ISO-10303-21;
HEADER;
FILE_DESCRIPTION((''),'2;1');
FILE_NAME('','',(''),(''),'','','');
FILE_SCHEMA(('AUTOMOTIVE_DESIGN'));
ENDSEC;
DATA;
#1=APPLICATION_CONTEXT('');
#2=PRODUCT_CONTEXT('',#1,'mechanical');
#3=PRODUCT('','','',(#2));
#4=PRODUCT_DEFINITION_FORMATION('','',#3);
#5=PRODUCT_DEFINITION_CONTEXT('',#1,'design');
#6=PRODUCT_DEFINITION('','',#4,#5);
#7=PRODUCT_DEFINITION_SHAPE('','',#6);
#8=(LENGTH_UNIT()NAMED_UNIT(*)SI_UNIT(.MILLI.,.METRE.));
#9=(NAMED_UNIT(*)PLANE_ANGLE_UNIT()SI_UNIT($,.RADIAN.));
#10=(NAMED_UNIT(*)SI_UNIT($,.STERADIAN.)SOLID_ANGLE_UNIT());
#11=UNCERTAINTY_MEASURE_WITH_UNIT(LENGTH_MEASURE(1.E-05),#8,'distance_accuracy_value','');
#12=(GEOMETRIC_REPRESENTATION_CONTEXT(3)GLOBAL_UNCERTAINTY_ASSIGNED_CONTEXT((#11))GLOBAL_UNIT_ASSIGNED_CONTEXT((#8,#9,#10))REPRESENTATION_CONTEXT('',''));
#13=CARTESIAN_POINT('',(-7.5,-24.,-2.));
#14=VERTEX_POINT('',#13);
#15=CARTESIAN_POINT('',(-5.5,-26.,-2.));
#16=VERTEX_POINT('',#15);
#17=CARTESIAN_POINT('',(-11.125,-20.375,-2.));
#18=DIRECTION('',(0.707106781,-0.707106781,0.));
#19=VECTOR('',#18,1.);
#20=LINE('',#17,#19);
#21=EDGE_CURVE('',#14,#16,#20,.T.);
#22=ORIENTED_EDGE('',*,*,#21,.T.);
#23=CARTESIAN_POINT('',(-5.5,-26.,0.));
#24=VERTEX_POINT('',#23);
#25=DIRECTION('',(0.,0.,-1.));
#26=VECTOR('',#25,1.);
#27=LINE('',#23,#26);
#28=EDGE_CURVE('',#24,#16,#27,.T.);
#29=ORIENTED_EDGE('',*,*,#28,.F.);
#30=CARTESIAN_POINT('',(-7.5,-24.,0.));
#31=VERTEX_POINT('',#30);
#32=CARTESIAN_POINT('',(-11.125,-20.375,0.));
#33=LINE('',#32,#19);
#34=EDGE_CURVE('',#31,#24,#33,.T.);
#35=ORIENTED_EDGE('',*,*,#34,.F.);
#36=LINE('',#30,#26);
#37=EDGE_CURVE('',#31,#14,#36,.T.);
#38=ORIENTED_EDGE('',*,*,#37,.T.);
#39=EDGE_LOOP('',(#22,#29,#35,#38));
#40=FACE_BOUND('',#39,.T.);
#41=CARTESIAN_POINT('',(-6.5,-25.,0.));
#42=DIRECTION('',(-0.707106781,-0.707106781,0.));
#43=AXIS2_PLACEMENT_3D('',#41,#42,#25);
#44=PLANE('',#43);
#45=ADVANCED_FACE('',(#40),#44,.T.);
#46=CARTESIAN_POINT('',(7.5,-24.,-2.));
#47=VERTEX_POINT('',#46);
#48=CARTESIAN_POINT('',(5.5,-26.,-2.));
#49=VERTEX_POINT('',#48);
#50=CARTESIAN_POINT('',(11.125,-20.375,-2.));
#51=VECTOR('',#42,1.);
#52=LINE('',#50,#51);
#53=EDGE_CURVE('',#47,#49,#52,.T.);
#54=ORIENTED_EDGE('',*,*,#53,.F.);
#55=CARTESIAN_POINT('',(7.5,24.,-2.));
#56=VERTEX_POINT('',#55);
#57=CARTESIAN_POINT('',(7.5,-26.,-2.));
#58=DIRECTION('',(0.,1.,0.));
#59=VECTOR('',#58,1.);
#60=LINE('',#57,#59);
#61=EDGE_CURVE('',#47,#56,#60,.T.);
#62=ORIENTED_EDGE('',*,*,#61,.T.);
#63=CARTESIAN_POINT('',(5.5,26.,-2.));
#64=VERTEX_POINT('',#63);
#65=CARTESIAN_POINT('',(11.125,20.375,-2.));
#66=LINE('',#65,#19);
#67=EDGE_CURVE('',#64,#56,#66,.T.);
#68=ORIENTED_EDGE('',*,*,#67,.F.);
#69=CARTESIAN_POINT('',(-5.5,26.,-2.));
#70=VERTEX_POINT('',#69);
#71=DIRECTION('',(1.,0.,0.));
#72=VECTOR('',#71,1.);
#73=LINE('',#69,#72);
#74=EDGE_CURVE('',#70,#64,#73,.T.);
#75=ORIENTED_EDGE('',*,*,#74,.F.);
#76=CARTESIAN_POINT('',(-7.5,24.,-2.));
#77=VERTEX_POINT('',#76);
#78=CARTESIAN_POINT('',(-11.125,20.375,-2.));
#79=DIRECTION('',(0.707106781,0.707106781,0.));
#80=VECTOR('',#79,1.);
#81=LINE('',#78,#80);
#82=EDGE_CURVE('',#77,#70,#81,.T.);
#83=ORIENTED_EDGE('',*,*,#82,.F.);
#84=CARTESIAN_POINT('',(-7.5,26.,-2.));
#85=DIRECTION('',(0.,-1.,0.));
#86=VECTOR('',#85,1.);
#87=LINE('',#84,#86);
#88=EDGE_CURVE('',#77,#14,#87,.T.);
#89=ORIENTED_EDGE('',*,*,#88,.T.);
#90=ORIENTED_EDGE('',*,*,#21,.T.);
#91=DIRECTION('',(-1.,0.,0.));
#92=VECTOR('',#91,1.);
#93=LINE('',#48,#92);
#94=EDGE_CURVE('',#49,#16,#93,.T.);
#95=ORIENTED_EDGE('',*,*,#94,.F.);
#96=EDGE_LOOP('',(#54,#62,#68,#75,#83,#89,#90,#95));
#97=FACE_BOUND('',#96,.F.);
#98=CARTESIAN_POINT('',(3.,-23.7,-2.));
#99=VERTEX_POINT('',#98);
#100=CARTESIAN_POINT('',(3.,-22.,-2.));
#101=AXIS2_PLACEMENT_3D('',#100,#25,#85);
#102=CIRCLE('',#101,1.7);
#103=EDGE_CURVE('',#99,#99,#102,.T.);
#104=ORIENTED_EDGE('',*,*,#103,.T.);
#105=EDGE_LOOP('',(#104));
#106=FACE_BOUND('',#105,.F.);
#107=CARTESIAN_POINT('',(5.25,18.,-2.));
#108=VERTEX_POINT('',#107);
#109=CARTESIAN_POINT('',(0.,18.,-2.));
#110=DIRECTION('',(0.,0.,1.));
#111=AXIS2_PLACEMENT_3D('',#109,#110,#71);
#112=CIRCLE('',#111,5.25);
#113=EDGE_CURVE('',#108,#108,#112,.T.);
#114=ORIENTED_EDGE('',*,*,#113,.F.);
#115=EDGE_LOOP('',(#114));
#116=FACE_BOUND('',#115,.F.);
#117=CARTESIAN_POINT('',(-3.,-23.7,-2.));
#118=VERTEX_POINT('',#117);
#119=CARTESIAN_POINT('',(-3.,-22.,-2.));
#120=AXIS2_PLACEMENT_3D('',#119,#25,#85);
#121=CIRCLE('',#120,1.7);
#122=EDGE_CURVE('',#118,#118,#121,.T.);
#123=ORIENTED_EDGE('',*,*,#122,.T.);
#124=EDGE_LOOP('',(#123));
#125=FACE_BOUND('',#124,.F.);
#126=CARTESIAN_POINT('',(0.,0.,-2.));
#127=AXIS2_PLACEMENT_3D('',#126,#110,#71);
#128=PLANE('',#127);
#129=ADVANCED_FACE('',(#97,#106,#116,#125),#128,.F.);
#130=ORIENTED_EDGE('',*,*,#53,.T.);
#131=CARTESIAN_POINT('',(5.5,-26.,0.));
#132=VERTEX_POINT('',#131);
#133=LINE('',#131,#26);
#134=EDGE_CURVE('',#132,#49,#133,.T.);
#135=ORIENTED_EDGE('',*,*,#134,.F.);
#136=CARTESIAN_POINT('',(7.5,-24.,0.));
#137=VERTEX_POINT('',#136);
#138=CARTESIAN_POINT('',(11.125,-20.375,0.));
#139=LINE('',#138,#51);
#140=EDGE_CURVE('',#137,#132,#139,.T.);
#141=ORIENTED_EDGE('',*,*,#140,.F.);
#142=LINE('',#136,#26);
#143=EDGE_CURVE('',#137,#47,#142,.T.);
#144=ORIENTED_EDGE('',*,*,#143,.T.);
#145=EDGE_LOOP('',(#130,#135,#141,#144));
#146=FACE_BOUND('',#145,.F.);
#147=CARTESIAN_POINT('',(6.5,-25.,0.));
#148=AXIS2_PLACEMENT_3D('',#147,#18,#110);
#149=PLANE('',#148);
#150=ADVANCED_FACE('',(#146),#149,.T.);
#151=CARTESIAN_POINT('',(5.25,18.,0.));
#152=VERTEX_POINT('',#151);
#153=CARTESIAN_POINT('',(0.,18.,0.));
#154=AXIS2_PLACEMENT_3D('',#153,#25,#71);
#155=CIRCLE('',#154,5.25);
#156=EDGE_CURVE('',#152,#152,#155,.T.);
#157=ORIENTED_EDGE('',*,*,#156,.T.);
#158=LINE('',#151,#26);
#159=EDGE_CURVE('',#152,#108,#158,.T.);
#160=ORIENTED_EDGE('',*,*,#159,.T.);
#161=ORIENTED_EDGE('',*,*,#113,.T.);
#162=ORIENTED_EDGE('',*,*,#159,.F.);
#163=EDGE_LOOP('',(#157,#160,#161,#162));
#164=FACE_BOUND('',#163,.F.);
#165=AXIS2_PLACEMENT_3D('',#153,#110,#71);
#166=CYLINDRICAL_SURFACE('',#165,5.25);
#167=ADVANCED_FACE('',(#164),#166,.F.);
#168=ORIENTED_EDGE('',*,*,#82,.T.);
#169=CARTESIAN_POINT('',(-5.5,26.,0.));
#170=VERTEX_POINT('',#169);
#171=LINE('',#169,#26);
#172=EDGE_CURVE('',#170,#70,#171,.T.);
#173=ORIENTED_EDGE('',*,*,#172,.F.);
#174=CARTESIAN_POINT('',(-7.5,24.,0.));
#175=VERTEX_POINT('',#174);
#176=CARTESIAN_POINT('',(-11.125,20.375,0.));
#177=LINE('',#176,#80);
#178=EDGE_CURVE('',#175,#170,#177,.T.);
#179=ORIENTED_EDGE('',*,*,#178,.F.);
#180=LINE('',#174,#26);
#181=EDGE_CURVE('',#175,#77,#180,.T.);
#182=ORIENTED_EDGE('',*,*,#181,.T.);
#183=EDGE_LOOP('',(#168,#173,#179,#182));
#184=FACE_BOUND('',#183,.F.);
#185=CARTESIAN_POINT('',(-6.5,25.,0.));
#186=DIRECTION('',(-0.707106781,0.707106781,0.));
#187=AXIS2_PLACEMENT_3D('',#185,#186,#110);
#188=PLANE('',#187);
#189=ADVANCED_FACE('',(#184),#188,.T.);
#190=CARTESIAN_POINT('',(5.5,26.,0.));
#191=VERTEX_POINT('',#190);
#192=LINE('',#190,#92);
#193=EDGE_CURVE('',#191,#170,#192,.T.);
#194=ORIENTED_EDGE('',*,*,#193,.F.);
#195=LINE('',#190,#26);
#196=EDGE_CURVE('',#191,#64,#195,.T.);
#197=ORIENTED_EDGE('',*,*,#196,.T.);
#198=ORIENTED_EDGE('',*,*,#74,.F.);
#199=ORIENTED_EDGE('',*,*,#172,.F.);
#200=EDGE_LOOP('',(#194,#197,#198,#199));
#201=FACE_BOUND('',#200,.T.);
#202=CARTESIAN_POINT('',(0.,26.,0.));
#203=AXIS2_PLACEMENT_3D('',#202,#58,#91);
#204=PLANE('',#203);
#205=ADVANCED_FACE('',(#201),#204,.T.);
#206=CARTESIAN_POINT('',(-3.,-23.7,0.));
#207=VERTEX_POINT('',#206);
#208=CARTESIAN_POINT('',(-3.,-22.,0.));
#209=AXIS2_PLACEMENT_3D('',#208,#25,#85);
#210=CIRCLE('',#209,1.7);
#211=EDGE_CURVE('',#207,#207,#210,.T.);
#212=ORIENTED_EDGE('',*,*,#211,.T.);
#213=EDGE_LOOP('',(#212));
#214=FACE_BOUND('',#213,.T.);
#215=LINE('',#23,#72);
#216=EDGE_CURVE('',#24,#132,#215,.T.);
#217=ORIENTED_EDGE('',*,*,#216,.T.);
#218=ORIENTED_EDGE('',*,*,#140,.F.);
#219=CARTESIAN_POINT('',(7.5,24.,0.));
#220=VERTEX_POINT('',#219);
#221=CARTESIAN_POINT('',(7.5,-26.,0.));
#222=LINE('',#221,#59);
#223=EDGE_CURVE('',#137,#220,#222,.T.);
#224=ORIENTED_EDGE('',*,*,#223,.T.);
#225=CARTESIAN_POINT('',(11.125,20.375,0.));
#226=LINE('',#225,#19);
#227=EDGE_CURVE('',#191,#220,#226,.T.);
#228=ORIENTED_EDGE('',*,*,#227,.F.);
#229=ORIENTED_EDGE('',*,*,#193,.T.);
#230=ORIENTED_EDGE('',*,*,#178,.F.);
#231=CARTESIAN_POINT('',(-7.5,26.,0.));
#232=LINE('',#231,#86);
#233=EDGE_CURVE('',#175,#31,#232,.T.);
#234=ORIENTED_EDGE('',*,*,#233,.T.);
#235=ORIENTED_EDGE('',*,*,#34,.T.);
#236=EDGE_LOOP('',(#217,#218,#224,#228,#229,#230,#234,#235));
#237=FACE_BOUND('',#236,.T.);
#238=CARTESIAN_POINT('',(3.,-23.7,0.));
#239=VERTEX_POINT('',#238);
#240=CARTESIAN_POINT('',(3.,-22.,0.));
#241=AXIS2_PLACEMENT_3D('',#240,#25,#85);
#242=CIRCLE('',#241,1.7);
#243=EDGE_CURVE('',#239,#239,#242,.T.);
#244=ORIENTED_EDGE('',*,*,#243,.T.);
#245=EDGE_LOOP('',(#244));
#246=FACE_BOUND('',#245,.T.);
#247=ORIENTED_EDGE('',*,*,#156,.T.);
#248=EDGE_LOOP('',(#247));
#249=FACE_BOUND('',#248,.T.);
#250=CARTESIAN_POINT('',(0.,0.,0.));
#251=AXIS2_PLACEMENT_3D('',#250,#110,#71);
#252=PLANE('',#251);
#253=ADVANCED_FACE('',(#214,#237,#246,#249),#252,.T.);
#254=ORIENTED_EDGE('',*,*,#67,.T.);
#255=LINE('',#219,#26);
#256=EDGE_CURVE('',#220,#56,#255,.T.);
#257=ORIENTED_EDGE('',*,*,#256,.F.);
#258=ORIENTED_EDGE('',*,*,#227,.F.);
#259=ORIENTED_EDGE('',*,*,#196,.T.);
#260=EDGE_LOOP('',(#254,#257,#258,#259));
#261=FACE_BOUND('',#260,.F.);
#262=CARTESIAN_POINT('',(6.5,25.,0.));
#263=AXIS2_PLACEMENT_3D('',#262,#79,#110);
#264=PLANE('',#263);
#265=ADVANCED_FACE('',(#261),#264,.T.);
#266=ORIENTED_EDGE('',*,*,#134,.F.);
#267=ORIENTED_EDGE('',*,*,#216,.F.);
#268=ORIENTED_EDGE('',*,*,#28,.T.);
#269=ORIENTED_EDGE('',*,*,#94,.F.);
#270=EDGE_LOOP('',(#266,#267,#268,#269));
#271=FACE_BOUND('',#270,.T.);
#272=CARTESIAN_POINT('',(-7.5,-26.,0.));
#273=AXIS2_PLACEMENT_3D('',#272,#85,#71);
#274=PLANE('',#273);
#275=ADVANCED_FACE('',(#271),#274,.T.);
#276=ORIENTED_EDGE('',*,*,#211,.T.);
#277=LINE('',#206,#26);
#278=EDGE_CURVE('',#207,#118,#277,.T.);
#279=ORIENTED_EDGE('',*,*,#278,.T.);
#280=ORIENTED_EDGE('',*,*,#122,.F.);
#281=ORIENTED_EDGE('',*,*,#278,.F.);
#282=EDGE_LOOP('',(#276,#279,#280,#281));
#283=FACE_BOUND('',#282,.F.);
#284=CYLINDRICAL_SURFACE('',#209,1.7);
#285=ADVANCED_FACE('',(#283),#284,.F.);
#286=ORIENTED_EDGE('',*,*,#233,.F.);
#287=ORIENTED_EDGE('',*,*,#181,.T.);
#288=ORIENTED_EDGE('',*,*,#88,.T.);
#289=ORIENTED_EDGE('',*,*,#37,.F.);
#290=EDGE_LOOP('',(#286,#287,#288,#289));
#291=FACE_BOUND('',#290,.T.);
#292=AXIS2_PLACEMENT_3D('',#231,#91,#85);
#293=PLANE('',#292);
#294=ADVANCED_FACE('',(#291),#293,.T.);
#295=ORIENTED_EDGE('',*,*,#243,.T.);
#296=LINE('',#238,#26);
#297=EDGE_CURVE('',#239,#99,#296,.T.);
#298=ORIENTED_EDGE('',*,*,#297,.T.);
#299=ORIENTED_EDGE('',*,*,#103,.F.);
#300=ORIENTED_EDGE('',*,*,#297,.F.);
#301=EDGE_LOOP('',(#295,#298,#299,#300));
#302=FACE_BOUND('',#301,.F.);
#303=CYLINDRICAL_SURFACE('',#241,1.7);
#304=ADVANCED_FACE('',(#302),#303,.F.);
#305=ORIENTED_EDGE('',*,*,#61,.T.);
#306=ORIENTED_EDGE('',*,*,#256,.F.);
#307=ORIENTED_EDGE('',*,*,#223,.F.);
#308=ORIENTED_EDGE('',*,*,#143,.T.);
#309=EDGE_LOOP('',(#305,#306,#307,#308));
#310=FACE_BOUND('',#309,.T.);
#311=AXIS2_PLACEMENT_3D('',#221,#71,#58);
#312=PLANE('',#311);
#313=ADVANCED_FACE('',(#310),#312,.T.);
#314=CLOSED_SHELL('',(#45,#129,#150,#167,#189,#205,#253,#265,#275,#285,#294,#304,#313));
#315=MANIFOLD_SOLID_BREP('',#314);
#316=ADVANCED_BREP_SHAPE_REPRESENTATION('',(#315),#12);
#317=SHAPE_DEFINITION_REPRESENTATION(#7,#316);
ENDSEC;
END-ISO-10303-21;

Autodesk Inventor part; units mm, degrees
ref_plane "YZ Plane" through (0, 0, 0) normal (1, 0, 0) x (0, 1, 0)
ref_plane "XZ Plane" through (0, 0, 0) normal (0, 1, 0) x (-1, 0, 0)
ref_plane "XY Plane" through (0, 0, 0) normal (0, 0, 1) x (1, 0, 0)
sketch "Sketch1" plane through (0, 0, 0) normal (0, 0, 1) x (1, 0, 0)
  line L0 (-7.5, -26) -> (7.5, -26)
  line L1 (7.5, -26) -> (7.5, 26)
  line L2 (7.5, 26) -> (-7.5, 26)
  line L3 (-7.5, 26) -> (-7.5, -26)
  line L4 (-7.5, -26) -> (7.5, 26) construction
  line L5 (7.5, -26) -> (-7.5, 26) construction
  line L6 (0, 26) -> (0, 18)
  circle A0 centre (0, 18) radius 5.25
  line L7 (0, -26) -> (0, -22)
  line L8 (-3, -22) -> (3, -22)
  circle A1 centre (-3, -22) radius 1.5
  circle A2 centre (3, -22) radius 1.5
  point P0 (0, 0)
  dimension "d0" = 15
  dimension "d1" = 52
  dimension "d2" = 8
  dimension "d3" = 10.5
  dimension "d6" = 4
  dimension "d7" = 6
  dimension "d8" = 3
  dimension "d9" = 3
extrude "Extrusion1" add sketch "Sketch1" against normal blind 2
chamfer "Chamfer1" distance 2 angle 45 4 edges at (7.5, 26, -1) (-7.5, 26, -1) (7.5, -26, -1) (-7.5, -26, -1)
hole "Hole1" at (-3, -22, 0) at (3, -22, 0) direction (0, 0, -1) diameter 3.4 end through all clearance for "Flat Head Machine Screw" size "M3" standard "Ansi Metric M Profile"
properties part number "Loadcell_lever"
